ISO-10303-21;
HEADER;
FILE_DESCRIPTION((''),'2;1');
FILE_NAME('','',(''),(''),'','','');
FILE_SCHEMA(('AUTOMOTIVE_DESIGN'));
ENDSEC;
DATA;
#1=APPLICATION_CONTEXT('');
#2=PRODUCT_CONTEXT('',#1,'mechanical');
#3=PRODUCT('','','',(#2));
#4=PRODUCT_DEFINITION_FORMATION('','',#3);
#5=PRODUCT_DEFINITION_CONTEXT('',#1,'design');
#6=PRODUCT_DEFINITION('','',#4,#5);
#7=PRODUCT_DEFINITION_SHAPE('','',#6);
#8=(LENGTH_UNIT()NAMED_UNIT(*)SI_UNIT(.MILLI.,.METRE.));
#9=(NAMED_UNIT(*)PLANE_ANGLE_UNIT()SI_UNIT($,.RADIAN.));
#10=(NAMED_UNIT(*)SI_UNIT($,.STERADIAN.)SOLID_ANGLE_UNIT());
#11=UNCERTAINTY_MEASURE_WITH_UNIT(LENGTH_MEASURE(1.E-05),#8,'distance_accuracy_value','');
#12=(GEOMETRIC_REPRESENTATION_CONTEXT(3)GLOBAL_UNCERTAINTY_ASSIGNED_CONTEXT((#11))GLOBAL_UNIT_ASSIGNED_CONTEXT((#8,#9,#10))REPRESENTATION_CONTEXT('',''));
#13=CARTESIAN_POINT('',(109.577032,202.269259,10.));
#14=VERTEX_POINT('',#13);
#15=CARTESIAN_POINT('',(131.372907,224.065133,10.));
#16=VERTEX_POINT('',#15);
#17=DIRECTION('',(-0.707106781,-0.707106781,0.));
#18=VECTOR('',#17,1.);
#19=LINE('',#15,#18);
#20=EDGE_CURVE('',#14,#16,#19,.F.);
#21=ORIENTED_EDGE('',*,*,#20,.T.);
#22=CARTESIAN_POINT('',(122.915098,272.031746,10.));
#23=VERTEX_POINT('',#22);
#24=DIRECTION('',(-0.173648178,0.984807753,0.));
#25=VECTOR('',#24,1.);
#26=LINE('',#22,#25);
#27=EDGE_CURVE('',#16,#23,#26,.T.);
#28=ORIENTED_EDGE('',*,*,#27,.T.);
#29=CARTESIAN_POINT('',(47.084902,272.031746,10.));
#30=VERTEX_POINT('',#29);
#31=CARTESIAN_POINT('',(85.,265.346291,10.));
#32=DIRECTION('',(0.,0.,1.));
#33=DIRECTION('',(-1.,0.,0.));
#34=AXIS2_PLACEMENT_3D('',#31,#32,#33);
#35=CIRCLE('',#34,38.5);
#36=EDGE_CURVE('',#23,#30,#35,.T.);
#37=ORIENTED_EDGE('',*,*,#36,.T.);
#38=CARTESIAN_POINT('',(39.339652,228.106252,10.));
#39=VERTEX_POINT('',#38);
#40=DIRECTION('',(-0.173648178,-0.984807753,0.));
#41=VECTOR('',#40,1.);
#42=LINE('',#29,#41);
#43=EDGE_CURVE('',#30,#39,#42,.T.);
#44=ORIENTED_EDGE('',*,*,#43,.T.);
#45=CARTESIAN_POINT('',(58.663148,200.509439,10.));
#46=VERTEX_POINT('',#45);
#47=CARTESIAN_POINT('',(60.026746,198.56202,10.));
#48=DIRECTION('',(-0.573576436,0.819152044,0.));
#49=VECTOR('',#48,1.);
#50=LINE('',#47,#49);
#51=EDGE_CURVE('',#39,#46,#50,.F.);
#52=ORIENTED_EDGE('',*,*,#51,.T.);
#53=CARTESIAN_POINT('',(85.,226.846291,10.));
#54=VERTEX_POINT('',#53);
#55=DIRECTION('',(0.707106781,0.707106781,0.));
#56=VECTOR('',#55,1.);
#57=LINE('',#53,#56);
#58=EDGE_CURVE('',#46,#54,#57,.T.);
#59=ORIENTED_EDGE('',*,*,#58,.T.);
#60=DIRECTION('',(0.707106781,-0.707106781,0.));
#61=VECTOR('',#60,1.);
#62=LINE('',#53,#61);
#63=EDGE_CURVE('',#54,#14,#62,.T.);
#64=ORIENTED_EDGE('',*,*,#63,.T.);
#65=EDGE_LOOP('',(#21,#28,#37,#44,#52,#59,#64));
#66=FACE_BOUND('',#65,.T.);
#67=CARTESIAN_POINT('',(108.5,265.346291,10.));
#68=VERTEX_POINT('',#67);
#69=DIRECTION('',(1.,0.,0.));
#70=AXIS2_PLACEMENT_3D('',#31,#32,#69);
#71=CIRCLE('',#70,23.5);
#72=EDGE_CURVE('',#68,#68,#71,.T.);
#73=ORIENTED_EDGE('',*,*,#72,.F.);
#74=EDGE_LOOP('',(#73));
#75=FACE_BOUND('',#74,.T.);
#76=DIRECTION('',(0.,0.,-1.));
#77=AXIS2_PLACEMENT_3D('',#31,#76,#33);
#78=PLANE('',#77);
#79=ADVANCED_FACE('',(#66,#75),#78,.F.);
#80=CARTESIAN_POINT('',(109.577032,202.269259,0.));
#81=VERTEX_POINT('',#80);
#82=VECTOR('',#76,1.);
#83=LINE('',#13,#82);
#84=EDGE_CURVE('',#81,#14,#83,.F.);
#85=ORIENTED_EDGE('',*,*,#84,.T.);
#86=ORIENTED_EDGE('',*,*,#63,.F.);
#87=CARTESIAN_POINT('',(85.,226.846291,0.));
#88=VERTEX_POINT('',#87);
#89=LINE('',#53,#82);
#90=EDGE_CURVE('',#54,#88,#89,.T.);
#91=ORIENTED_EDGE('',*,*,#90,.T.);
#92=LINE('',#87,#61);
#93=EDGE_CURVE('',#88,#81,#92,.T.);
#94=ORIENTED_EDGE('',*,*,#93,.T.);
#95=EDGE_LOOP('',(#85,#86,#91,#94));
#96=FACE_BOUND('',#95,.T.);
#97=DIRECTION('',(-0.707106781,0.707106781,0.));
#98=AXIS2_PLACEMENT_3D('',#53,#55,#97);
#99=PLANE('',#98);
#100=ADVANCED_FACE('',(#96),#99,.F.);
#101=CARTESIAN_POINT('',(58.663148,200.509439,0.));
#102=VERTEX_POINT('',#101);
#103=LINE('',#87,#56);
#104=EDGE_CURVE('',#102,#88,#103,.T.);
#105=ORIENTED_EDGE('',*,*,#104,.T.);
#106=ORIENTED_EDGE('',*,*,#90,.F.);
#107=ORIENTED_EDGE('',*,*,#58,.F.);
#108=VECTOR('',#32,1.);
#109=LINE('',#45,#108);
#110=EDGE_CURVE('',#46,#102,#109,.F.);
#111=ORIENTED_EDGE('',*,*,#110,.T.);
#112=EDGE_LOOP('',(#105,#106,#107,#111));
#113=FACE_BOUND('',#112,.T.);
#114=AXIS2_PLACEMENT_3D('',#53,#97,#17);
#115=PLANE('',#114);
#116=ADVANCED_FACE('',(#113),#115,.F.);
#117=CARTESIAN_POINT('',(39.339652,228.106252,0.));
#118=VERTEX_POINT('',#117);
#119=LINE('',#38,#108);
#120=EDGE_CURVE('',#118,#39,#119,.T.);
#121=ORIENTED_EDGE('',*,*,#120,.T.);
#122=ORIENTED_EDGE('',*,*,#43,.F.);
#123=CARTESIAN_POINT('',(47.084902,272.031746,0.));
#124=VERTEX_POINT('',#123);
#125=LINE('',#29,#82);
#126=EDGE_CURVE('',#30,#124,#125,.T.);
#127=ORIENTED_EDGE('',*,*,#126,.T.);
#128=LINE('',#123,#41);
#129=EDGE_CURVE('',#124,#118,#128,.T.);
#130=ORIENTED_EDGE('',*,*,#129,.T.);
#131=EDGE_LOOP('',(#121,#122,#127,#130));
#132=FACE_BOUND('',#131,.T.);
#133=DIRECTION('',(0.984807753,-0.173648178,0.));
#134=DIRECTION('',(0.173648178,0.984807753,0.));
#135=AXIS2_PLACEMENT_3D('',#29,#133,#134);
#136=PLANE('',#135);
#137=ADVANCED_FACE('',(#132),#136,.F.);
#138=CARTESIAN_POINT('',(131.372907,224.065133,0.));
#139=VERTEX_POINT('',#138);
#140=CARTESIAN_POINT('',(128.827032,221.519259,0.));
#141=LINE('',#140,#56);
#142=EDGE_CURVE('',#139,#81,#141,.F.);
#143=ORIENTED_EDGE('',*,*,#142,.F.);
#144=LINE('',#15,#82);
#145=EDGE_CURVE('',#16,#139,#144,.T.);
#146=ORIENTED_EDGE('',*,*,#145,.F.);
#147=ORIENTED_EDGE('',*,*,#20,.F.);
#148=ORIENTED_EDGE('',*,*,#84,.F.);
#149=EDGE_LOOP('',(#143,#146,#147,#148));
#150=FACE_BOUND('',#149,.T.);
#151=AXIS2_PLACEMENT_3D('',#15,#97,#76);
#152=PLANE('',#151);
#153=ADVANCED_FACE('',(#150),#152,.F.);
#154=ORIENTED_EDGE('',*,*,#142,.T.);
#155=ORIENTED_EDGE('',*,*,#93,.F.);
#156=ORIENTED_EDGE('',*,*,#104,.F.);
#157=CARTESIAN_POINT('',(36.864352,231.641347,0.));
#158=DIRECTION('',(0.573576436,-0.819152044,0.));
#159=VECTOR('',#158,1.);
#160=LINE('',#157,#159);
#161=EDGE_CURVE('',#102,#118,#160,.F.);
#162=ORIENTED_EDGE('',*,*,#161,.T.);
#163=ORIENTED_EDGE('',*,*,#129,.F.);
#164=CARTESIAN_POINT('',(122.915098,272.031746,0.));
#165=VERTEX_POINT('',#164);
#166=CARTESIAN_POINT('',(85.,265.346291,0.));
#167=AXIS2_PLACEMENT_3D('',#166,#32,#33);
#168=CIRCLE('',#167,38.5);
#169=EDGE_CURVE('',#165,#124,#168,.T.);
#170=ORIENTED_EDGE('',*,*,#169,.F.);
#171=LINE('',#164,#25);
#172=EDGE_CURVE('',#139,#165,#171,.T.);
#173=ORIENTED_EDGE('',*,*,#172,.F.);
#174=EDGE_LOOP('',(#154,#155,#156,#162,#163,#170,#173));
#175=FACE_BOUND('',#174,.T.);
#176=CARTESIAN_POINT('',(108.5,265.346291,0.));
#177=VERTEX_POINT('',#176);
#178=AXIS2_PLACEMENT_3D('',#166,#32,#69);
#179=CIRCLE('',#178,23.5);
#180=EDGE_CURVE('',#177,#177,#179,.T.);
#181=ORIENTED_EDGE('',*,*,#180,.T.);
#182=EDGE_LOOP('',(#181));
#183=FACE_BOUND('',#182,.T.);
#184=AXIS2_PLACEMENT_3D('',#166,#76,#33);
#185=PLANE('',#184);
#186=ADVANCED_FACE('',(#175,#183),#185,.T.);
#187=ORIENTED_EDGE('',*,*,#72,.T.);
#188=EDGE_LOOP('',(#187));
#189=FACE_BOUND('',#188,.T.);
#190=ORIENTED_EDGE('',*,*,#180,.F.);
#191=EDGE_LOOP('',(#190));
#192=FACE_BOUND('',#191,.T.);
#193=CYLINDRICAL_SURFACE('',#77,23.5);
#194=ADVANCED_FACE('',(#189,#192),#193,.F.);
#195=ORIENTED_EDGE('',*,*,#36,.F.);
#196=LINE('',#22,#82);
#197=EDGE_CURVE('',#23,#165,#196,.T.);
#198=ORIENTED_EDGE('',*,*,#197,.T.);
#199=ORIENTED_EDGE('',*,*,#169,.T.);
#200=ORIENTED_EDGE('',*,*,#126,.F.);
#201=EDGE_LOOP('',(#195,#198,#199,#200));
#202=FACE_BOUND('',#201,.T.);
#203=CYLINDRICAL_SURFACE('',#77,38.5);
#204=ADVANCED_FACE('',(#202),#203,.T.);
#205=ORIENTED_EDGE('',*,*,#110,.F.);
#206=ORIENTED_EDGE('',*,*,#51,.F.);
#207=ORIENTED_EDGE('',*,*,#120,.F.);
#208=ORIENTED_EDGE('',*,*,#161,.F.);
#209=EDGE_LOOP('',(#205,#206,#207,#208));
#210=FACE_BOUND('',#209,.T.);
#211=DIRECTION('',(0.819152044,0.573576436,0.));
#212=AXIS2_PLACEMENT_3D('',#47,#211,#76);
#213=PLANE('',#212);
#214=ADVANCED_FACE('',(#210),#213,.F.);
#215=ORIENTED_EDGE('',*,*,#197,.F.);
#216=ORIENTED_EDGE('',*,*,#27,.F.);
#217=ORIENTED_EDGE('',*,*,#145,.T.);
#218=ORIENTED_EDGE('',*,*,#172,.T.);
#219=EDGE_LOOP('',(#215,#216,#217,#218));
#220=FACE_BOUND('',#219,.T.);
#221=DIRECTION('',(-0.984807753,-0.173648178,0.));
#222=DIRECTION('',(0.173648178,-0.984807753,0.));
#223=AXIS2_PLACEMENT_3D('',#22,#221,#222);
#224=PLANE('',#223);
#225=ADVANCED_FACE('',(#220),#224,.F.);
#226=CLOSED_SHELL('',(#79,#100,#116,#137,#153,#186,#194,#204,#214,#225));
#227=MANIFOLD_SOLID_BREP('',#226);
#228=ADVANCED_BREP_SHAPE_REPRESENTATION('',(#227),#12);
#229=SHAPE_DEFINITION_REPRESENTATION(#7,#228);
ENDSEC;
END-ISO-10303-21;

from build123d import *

# Parameters (mm, degrees)
ESQUISSE1_R        = 23.5
BOSS_EXTRU_1_DEPTH = 10
CHANFREIN1_SIZE    = 25.8965397
CHANFREIN1_SIZE_2  = 30


with BuildPart() as part:
    # Esquisse1 → Boss.-Extru.1 (new body)
    with BuildSketch(Plane.XY):
        with BuildLine():
            Line((85, 226.846291066), (56.715728753, 198.562019819))
            Line((56.715728753, 198.562019819), (34.130206535, 198.562019819))
            Line((34.130206535, 198.562019819), (47.084901509, 272.031745907))
            ThreePointArc((47.084901509, 272.031745907), (85, 303.846291066), (122.915098491, 272.031745907))
            Line((122.915098491, 272.031745907), (135.869793465, 198.562019819))
            Line((135.869793465, 198.562019819), (113.284271247, 198.562019819))
            Line((113.284271247, 198.562019819), (85, 226.846291066))
        make_face()
        with Locations((85, 265.346291066)):
            Circle(ESQUISSE1_R, mode=Mode.SUBTRACT)
    extrude(amount=BOSS_EXTRU_1_DEPTH)

    # Chanfrein1
    # the kernel refuses this chamfer: 30, 25.8965397 mm, written as the material it takes off along each edge
    with BuildSketch(Plane(origin=(34.130206535, 198.562019819, -77.150489639), x_dir=(0.9993171132668053, -0.036950062680586405, 0), z_dir=(0, 0, 1)), Plane(origin=(135.869793465, 198.562019819, -77.150489639), x_dir=(-0.13714088742803301, 0.9905515519120909, 0), z_dir=(0, 0, 1))) as chanfrein1_piece_1:
        Polygon((CHANFREIN1_SIZE * 0.999317113282, CHANFREIN1_SIZE * 0.0369500626812), (CHANFREIN1_SIZE_2 * 0.137140887428, CHANFREIN1_SIZE_2 * 0.990551551912), (0, 0), align=None)
    extrude(amount=164.300979278, mode=Mode.SUBTRACT)


solid = part.part
